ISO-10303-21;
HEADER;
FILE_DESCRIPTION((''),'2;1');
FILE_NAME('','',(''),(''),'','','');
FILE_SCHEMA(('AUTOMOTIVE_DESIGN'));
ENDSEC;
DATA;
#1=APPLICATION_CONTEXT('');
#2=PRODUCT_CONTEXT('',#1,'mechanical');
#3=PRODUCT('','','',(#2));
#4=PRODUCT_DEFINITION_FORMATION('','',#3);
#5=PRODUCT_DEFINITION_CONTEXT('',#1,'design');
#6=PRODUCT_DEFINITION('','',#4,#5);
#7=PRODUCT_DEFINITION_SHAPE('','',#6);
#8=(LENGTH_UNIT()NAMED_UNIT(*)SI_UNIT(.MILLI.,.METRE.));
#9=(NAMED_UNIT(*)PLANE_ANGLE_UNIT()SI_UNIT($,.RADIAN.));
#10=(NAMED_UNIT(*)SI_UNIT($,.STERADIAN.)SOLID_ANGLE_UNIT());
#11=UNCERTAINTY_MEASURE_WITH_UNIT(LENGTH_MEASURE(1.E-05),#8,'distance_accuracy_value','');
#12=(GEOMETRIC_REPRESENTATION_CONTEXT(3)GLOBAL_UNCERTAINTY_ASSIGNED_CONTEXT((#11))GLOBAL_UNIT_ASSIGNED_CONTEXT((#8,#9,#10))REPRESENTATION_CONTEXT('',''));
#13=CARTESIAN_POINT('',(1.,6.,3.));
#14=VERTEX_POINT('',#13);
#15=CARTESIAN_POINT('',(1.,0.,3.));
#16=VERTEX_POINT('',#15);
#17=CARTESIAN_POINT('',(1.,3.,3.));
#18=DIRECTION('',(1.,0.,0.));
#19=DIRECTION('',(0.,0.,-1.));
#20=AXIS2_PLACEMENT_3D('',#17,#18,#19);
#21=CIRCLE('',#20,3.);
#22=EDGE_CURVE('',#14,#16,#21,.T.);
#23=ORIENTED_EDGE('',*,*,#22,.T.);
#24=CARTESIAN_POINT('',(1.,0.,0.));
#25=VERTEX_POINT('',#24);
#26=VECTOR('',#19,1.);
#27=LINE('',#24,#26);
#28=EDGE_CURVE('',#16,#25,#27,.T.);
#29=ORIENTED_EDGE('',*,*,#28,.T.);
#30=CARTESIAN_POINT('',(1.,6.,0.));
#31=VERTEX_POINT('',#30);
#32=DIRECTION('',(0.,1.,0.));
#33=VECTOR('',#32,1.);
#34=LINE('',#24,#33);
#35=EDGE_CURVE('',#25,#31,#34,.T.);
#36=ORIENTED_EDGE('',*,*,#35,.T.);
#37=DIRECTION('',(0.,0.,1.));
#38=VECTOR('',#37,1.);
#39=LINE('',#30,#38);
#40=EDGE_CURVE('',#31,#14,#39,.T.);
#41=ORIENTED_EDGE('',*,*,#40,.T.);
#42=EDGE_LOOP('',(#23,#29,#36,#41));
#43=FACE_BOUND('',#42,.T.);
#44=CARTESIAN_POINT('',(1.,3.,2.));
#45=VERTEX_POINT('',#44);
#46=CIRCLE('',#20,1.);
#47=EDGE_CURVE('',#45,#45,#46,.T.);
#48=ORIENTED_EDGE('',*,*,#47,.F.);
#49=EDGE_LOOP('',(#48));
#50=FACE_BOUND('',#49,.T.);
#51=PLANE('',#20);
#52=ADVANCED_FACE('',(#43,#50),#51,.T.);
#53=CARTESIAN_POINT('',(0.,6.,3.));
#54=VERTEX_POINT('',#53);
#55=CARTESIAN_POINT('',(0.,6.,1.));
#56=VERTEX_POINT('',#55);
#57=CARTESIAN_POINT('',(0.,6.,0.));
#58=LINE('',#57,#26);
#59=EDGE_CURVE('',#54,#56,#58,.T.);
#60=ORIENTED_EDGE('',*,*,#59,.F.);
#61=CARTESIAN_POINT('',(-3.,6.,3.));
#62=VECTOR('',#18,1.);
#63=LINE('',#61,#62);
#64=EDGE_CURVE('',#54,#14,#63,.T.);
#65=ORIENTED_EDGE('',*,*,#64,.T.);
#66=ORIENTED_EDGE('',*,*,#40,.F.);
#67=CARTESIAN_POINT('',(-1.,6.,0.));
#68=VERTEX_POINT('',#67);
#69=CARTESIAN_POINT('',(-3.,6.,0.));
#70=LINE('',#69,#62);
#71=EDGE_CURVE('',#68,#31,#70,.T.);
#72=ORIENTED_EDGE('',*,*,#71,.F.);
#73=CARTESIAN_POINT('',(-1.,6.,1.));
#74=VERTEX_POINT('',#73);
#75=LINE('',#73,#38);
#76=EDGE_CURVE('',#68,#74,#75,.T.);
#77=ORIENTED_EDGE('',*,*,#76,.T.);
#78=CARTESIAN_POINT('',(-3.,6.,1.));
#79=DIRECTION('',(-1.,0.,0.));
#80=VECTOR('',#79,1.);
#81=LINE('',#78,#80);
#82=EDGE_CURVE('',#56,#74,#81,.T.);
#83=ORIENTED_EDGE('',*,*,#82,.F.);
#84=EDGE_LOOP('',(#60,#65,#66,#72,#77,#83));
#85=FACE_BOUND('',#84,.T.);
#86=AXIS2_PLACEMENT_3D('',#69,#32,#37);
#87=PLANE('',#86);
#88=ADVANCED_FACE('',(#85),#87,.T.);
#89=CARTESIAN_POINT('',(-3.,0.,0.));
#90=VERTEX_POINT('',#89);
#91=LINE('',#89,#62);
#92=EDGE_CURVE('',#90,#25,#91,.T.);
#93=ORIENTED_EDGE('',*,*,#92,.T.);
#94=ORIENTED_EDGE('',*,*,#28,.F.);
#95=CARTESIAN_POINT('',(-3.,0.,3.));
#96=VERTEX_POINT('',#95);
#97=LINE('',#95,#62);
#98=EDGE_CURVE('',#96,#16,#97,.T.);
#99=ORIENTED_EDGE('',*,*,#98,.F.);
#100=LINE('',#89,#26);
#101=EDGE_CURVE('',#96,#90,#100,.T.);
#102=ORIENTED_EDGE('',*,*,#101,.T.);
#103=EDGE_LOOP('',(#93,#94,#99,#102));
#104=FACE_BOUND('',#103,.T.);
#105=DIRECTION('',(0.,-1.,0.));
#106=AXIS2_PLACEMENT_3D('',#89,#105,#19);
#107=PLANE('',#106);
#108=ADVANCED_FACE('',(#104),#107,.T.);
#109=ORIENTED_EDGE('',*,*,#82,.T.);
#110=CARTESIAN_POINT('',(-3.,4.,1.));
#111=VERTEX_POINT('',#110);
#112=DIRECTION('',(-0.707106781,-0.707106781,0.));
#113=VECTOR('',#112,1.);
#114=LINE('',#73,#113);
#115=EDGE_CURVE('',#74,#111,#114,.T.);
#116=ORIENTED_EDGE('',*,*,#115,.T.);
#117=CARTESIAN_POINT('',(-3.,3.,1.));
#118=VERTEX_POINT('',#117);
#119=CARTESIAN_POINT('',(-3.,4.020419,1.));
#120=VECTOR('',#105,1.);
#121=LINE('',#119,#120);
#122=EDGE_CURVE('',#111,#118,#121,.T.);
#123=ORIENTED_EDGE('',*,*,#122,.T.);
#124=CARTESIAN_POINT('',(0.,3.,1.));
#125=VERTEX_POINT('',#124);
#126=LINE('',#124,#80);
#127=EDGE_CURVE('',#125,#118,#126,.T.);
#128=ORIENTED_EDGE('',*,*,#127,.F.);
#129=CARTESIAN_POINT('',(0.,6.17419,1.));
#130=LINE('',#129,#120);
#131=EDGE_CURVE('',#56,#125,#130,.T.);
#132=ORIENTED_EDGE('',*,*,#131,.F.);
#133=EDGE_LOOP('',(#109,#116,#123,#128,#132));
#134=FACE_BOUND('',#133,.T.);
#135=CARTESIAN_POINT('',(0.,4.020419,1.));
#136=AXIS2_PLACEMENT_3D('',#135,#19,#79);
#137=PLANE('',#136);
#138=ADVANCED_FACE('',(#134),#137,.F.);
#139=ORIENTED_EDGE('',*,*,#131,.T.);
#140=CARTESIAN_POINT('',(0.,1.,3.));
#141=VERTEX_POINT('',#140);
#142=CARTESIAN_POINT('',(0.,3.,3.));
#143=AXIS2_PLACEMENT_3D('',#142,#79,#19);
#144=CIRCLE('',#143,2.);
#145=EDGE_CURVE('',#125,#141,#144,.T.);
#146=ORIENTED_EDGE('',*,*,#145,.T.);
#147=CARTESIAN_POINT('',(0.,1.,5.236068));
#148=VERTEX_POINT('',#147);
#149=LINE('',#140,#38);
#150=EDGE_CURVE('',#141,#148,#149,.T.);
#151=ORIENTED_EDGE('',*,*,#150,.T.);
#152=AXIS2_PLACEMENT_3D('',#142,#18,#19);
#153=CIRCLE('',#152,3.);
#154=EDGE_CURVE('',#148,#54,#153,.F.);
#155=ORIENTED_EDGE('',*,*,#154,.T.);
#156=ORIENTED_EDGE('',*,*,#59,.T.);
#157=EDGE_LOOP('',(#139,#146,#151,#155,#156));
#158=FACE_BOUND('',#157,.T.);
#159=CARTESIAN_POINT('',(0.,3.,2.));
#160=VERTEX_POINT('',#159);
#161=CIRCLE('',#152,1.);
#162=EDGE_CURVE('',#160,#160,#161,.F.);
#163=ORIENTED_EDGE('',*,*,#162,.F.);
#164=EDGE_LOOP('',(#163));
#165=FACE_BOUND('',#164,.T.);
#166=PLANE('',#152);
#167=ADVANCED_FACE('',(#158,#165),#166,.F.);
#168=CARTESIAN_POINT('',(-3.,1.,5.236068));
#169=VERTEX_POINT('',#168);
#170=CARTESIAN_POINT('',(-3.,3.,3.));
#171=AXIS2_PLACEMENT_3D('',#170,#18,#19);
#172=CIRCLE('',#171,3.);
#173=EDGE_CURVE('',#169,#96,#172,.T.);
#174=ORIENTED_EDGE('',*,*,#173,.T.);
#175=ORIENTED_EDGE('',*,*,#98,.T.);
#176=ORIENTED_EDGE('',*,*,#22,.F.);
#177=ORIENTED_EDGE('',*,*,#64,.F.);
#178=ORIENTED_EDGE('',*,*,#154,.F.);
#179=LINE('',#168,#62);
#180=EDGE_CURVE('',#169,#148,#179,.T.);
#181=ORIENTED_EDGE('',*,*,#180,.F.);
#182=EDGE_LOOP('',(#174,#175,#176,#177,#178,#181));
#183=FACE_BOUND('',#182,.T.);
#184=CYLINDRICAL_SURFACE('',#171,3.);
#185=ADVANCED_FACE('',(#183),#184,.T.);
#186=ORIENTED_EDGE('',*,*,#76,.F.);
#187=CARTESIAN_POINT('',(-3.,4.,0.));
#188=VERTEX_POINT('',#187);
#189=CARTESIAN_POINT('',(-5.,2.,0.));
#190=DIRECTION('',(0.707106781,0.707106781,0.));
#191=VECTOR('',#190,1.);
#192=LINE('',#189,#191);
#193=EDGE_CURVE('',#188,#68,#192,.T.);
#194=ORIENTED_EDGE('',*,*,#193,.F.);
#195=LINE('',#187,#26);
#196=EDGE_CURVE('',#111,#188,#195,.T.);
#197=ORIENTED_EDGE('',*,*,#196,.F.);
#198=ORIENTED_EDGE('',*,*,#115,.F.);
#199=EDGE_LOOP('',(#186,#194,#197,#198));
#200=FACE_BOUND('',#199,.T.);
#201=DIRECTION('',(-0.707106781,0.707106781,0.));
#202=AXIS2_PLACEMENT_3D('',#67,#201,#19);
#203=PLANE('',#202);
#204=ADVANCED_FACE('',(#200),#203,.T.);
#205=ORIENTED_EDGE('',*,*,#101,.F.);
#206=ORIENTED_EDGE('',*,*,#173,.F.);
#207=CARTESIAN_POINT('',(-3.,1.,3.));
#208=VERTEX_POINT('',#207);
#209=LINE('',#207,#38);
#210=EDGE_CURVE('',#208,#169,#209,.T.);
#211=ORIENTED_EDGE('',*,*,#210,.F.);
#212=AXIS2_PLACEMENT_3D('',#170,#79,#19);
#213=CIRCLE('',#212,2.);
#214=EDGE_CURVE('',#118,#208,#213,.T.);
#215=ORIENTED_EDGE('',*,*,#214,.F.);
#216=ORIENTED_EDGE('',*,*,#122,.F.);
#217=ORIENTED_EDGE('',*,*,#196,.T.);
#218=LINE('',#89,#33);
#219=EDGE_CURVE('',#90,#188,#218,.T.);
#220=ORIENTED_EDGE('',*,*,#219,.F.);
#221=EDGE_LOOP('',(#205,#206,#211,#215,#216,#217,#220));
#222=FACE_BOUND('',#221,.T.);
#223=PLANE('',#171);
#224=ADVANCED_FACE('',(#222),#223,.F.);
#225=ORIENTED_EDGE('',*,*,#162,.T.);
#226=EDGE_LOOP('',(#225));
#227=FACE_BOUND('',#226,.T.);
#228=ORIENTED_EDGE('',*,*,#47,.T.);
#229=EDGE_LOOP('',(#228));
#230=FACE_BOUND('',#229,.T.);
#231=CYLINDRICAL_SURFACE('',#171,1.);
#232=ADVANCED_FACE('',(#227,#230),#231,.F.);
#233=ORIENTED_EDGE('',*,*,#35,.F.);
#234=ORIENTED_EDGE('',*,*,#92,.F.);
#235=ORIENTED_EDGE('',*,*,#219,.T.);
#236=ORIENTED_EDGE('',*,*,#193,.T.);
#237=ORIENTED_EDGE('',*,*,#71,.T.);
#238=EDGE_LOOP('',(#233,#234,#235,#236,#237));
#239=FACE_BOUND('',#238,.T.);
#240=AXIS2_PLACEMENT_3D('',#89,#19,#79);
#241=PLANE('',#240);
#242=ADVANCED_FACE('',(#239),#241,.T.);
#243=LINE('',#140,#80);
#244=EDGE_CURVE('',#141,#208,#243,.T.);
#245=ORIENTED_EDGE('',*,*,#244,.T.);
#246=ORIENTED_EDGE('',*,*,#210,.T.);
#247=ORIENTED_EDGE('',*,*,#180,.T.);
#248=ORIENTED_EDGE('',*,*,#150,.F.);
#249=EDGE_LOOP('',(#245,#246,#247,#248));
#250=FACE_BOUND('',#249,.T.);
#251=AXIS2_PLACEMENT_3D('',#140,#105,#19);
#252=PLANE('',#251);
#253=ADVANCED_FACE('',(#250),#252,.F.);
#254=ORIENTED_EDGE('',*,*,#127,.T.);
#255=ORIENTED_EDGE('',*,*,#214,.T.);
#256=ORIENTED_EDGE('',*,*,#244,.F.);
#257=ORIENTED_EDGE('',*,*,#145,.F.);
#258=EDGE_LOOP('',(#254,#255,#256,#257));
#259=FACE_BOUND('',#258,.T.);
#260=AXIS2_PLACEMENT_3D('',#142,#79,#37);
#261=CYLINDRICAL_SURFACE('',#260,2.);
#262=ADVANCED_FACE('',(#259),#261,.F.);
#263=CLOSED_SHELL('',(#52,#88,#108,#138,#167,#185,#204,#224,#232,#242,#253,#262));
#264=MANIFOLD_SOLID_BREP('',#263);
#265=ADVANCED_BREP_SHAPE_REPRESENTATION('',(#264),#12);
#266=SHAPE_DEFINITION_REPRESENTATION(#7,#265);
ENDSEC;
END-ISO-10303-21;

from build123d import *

# Parameters (mm, degrees)
BOSS_EXTRUDE1_DEPTH      = 1
BOSS_EXTRUDE1_DEPTH_BACK = 3
SKETCH1_R                = 1
CUT_EXTRUDE2_DEPTH       = 3
CHAMFER1_SIZE            = 2


with BuildPart() as part:
    # Sketch1 → Boss-Extrude1 (new, two sides: drawn at the far end of the back side and taken through both)
    with BuildSketch(Plane(origin=(0, 0, 0), x_dir=(0, 0, -1), z_dir=(1, 0, 0)).offset(-BOSS_EXTRUDE1_DEPTH_BACK)):
        with BuildLine():
            Line((0, 0), (0, 6))
            Line((0, 6), (-3, 6))
            ThreePointArc((-3, 6), (-6, 3), (-3, 0))
            Line((-3, 0), (0, 0))
        make_face()
        with Locations((-3, 3)):
            Circle(SKETCH1_R, mode=Mode.SUBTRACT)
    extrude(amount=BOSS_EXTRUDE1_DEPTH + BOSS_EXTRUDE1_DEPTH_BACK)

    # Sketch2 → Cut-Extrude2 (cut)
    with BuildSketch(Plane.ZY.offset(3)):
        with BuildLine():
            Line((3, 1), (7.614070683, 1))
            Line((7.614070683, 1), (7.614070683, 6.174190234))
            Line((7.614070683, 6.174190234), (1, 6.174190234))
            Line((1, 6.174190234), (1, 4.020419478))
            Line((1, 4.020419478), (1, 3))
            ThreePointArc((1, 3), (1.585786438, 1.585786438), (3, 1))
        make_face()
    extrude(amount=-CUT_EXTRUDE2_DEPTH, mode=Mode.SUBTRACT)

    # Chamfer1
    chamfer1_edges = [part.edges().sort_by_distance(p)[0] for p in [
        (-3, 6, 0.5),
    ]]
    chamfer(chamfer1_edges, length=CHAMFER1_SIZE)


solid = part.part
